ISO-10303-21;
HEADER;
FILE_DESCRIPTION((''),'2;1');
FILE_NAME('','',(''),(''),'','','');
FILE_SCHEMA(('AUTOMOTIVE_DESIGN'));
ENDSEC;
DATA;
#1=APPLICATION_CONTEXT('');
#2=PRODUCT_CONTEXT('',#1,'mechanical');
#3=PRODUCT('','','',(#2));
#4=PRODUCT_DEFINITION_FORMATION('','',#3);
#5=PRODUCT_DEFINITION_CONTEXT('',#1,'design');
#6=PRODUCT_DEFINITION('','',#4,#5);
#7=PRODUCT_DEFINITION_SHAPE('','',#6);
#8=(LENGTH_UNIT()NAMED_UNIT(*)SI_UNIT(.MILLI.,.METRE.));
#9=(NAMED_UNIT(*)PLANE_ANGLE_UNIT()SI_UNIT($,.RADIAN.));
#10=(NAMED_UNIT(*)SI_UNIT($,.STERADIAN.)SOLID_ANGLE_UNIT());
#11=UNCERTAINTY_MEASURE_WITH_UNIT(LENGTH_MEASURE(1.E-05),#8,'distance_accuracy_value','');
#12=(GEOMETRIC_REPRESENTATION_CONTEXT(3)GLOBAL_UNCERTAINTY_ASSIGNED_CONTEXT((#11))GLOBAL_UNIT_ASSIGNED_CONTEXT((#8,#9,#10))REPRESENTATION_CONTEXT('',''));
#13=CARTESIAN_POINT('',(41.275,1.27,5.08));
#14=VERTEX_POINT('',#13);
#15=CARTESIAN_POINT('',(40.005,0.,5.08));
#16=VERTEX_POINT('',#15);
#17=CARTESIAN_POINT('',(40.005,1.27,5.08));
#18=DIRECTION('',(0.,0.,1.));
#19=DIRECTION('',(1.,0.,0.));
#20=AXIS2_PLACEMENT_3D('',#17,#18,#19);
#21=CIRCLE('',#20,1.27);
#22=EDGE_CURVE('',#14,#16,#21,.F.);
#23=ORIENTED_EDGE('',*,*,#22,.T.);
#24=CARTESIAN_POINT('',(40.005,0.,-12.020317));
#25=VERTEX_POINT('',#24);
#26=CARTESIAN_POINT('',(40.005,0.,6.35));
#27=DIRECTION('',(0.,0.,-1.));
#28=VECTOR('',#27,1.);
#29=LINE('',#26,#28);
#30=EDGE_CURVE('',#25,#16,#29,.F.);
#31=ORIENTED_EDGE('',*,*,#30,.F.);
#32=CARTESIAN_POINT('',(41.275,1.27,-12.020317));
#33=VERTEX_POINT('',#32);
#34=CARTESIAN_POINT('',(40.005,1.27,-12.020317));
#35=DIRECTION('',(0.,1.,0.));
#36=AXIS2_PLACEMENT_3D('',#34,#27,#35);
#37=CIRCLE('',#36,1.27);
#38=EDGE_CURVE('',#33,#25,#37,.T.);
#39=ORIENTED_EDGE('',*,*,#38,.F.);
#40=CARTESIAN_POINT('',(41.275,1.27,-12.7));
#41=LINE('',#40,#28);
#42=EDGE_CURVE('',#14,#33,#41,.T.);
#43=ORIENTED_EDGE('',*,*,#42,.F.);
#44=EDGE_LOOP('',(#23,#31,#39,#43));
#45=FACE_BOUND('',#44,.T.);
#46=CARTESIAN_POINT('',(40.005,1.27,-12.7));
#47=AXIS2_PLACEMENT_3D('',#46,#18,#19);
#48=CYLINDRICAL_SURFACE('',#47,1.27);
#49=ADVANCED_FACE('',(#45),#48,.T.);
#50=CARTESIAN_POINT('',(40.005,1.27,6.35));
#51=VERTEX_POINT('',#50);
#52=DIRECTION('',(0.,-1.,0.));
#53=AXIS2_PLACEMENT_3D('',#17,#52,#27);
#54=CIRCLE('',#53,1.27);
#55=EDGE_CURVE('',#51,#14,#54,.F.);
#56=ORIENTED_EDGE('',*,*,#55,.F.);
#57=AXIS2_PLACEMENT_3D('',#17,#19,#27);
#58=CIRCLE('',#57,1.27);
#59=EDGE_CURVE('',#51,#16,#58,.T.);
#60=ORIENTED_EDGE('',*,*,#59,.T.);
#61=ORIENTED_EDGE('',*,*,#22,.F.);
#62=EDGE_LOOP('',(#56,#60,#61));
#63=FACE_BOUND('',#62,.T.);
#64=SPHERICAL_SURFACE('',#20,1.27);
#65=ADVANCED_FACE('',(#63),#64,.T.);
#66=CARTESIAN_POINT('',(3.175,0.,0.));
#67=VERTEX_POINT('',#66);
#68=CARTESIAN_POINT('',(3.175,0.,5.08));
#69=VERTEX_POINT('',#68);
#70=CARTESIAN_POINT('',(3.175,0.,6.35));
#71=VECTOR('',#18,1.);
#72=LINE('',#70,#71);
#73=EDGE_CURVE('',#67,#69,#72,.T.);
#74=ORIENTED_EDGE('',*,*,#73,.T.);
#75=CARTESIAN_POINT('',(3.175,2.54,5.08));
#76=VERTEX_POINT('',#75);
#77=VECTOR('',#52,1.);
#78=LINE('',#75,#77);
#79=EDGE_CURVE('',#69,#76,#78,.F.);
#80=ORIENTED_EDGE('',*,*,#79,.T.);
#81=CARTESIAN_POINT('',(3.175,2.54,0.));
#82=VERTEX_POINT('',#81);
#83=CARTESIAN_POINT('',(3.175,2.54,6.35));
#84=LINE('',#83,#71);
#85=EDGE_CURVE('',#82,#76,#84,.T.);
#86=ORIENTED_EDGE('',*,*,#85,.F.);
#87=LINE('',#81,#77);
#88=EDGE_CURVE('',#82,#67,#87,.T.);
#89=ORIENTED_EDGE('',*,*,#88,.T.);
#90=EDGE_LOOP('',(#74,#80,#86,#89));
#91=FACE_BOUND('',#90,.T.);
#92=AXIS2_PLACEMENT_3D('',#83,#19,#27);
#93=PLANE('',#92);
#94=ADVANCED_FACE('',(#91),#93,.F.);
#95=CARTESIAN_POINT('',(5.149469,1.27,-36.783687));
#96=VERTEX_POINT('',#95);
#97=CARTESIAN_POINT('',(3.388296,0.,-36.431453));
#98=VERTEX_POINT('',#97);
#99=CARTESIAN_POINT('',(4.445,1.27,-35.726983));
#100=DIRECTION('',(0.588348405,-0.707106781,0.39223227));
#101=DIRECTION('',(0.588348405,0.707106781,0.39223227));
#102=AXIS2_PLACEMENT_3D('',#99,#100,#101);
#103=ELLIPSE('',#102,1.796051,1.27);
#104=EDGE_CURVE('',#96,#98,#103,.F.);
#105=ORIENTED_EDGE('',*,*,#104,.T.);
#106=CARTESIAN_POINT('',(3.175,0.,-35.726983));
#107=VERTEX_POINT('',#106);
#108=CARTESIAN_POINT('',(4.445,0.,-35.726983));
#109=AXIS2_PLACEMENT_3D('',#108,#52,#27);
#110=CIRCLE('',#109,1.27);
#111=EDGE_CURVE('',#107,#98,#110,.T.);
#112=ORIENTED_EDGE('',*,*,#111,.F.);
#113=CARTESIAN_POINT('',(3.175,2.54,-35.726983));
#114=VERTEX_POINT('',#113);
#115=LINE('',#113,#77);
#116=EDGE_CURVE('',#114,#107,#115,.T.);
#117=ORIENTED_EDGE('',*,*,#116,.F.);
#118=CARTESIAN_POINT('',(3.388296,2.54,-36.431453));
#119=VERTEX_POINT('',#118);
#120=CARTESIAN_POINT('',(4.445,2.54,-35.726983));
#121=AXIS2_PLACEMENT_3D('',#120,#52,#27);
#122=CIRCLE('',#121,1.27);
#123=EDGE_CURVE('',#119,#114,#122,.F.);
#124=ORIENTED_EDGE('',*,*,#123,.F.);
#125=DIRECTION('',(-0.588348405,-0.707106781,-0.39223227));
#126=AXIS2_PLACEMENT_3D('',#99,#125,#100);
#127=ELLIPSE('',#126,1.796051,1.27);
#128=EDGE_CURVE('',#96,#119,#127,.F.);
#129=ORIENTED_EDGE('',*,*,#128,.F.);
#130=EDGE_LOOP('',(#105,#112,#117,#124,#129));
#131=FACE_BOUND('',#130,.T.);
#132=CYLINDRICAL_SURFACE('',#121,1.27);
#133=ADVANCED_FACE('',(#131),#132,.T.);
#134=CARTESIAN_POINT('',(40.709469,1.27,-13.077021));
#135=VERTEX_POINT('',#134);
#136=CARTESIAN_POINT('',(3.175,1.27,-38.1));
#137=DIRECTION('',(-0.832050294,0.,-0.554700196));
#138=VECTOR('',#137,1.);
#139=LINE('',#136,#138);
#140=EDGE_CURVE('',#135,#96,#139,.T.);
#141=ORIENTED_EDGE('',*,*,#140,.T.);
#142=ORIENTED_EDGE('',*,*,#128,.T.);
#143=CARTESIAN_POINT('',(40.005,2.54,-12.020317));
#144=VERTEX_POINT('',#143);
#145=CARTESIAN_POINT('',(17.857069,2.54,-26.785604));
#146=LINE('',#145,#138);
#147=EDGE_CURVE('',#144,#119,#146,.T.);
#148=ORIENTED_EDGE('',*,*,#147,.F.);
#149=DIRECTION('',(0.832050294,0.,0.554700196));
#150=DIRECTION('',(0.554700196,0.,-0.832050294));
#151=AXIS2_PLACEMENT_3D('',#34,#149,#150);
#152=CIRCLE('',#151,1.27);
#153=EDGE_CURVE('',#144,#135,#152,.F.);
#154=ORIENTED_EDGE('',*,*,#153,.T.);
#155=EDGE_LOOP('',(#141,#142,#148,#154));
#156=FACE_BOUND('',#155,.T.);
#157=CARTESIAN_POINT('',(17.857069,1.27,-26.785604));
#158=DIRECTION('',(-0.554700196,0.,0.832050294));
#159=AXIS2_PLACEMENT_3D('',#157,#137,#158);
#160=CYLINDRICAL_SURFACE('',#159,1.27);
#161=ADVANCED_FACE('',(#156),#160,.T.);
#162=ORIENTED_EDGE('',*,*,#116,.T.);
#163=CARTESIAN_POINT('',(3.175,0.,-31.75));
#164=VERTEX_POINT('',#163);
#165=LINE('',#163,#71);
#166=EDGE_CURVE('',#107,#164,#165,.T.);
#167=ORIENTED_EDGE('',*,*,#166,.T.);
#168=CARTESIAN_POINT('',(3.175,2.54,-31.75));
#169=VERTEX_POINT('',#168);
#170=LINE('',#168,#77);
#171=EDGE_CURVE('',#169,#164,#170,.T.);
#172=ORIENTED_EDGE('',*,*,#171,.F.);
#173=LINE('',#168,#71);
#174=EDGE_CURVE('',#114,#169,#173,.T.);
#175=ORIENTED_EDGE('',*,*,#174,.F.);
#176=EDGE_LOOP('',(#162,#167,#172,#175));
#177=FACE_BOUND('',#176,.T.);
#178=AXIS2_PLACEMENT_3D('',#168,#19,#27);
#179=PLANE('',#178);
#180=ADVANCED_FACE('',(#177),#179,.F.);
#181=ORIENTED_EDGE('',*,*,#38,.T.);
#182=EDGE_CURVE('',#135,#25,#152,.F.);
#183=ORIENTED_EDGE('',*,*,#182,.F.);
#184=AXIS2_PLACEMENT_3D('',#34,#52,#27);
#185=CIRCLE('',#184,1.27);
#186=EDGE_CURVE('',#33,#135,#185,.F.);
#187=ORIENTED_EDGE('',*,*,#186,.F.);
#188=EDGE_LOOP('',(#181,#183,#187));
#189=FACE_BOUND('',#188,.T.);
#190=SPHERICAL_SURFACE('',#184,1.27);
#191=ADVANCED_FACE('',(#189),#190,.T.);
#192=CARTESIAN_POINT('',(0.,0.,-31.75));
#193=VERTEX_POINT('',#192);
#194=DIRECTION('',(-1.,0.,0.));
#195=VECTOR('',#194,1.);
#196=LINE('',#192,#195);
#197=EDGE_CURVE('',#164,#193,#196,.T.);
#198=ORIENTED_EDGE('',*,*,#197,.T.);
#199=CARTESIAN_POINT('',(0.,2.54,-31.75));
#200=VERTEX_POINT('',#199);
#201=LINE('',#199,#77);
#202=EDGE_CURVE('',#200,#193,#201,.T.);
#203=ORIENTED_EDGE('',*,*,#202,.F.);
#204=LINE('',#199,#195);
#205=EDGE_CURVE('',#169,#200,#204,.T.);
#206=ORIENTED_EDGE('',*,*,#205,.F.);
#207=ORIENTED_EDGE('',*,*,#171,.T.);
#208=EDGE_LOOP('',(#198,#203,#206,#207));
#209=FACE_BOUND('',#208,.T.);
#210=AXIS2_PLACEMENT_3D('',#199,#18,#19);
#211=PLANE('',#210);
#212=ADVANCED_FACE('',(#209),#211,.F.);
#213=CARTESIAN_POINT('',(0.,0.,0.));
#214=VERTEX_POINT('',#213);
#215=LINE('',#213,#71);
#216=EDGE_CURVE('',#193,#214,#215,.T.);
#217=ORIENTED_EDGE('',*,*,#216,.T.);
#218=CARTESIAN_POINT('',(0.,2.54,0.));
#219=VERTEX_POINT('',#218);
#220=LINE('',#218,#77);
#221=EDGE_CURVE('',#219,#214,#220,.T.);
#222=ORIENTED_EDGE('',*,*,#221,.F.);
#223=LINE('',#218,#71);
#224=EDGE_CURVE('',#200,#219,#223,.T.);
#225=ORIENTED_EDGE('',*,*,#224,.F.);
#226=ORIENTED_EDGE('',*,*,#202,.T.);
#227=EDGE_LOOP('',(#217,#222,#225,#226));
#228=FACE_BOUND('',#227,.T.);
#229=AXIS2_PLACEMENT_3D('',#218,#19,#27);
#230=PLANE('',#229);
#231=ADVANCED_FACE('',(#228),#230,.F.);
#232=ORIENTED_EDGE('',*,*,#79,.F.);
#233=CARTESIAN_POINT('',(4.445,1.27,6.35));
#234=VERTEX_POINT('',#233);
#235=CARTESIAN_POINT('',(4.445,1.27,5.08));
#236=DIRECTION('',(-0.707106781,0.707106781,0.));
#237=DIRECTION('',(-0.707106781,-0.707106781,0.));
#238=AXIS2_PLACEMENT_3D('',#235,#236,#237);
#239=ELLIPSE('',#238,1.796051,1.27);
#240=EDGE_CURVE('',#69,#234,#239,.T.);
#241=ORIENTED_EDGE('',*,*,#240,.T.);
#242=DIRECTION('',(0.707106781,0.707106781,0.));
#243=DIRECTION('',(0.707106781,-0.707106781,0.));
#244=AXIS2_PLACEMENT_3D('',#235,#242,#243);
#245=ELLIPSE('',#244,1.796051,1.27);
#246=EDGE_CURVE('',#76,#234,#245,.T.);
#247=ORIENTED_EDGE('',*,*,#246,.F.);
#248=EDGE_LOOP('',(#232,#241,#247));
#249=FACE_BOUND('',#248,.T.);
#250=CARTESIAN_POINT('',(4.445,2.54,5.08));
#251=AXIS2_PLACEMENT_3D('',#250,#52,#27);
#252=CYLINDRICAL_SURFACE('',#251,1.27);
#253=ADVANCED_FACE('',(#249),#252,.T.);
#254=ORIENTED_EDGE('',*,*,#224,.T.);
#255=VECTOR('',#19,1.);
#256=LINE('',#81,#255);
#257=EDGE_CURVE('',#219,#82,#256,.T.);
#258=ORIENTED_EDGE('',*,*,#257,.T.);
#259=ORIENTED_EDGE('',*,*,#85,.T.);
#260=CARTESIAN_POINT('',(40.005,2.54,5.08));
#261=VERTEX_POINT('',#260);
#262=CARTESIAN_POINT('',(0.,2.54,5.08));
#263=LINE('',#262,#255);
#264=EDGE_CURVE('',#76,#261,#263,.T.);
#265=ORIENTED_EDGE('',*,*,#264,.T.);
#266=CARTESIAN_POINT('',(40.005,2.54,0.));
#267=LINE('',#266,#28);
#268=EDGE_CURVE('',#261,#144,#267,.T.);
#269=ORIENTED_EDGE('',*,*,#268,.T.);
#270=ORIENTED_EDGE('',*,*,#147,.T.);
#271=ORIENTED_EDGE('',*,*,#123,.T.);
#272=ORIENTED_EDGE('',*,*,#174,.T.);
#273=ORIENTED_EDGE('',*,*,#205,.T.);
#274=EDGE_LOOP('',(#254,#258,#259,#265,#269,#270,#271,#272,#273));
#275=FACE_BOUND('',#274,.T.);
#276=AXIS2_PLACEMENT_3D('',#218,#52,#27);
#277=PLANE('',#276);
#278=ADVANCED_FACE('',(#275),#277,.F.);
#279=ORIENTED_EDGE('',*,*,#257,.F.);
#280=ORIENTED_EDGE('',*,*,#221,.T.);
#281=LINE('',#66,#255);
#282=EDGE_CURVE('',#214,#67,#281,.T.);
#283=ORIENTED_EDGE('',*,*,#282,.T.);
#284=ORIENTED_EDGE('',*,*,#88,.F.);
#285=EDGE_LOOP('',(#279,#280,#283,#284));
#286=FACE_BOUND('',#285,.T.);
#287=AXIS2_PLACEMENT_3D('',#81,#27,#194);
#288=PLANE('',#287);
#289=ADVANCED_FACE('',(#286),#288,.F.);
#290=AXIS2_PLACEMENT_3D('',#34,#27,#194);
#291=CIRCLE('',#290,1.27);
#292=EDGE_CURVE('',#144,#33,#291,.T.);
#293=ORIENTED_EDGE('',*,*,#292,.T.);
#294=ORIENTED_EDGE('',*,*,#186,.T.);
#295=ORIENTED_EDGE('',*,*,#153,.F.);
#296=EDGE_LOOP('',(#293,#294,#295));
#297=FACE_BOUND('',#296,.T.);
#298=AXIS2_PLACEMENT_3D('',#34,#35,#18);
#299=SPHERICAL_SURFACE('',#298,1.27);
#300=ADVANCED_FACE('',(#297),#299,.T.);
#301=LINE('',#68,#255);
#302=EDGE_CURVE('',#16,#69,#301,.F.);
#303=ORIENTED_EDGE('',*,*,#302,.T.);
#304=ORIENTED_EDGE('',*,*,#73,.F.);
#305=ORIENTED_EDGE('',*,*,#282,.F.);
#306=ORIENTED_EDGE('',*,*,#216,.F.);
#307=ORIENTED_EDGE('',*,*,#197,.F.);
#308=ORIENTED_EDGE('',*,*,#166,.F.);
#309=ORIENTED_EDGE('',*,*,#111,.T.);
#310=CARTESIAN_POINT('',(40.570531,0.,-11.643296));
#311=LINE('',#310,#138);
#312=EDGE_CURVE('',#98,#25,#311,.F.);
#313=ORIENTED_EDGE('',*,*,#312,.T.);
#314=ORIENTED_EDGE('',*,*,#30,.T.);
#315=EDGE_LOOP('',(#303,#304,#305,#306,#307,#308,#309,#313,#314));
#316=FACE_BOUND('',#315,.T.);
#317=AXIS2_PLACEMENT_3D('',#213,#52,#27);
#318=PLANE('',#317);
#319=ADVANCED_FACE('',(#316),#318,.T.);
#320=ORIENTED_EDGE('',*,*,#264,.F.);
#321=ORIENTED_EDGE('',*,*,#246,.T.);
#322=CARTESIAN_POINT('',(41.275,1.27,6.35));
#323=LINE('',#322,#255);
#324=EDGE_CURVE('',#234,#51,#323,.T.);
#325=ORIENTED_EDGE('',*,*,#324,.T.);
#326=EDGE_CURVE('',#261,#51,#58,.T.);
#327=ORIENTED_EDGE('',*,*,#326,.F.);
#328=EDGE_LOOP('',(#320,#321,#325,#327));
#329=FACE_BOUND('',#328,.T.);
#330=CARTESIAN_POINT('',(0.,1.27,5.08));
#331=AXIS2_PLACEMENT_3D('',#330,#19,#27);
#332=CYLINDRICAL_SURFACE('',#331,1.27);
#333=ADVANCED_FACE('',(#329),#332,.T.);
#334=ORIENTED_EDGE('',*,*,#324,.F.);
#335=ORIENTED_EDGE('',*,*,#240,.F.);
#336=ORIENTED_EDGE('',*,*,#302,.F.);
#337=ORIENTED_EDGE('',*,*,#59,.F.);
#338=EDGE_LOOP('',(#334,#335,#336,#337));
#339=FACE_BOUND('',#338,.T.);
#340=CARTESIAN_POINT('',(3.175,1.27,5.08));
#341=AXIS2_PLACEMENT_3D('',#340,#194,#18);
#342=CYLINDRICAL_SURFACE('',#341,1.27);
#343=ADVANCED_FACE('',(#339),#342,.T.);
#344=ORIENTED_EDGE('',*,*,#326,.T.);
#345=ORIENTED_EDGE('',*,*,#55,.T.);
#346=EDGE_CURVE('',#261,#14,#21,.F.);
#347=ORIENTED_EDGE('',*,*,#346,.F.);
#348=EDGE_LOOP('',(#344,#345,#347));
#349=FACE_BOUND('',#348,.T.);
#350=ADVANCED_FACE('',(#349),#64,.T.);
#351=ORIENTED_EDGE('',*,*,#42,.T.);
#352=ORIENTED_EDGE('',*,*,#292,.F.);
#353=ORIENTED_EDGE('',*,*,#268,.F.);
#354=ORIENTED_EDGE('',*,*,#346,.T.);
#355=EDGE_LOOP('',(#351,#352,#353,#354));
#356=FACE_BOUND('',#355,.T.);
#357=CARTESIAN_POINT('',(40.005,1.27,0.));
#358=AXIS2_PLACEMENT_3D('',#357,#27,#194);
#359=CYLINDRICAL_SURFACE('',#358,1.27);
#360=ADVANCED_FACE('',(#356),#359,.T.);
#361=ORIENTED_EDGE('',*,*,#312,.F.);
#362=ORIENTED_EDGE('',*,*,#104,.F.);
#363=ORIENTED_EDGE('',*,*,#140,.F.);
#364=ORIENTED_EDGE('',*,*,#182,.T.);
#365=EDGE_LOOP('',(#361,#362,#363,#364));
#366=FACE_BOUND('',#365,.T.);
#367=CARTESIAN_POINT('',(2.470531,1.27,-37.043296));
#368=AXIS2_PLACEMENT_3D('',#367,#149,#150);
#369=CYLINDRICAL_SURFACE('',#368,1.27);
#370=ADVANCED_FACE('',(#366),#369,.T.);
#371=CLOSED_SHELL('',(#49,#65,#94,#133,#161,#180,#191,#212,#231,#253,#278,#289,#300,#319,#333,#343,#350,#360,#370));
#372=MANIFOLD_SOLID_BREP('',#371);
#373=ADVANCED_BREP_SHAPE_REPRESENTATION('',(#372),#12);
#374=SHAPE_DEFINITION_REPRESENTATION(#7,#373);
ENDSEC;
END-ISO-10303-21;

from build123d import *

# Parameters (mm, degrees)
BOSS_EXTRUDE1_DEPTH = 2.54
FILLET1_R           = 1.27


with BuildPart() as part:
    # Sketch1 → Boss-Extrude1 (new body)
    with BuildSketch(Plane(origin=(0, 0, 0), x_dir=(1, 0, 0), z_dir=(0, 1, 0))):
        Polygon((0, 0), (0, 31.75), (3.175, 31.75), (3.175, 38.1), (41.275, 12.7), (41.275, -6.35), (3.175, -6.35), (3.175, 0), align=None)
    extrude(amount=BOSS_EXTRUDE1_DEPTH)

    # Fillet1
    fillet1_edges = [part.edges().sort_by_distance(p)[0] for p in [
        (41.275, 0, -3.175),
        (22.225, 0, 6.35),
        (22.225, 2.54, 6.35),
        (3.175, 1.27, -38.1),
        (41.275, 1.27, -12.7),
        (41.275, 1.27, 6.35),
        (3.175, 1.27, 6.35),
        (41.275, 2.54, -3.175),
        (22.225, 2.54, -25.4),
        (22.225, 0, -25.4),
    ]]
    fillet(fillet1_edges, radius=FILLET1_R - 0.0001)  # a hair under: the kernel refuses the full size


solid = part.part
